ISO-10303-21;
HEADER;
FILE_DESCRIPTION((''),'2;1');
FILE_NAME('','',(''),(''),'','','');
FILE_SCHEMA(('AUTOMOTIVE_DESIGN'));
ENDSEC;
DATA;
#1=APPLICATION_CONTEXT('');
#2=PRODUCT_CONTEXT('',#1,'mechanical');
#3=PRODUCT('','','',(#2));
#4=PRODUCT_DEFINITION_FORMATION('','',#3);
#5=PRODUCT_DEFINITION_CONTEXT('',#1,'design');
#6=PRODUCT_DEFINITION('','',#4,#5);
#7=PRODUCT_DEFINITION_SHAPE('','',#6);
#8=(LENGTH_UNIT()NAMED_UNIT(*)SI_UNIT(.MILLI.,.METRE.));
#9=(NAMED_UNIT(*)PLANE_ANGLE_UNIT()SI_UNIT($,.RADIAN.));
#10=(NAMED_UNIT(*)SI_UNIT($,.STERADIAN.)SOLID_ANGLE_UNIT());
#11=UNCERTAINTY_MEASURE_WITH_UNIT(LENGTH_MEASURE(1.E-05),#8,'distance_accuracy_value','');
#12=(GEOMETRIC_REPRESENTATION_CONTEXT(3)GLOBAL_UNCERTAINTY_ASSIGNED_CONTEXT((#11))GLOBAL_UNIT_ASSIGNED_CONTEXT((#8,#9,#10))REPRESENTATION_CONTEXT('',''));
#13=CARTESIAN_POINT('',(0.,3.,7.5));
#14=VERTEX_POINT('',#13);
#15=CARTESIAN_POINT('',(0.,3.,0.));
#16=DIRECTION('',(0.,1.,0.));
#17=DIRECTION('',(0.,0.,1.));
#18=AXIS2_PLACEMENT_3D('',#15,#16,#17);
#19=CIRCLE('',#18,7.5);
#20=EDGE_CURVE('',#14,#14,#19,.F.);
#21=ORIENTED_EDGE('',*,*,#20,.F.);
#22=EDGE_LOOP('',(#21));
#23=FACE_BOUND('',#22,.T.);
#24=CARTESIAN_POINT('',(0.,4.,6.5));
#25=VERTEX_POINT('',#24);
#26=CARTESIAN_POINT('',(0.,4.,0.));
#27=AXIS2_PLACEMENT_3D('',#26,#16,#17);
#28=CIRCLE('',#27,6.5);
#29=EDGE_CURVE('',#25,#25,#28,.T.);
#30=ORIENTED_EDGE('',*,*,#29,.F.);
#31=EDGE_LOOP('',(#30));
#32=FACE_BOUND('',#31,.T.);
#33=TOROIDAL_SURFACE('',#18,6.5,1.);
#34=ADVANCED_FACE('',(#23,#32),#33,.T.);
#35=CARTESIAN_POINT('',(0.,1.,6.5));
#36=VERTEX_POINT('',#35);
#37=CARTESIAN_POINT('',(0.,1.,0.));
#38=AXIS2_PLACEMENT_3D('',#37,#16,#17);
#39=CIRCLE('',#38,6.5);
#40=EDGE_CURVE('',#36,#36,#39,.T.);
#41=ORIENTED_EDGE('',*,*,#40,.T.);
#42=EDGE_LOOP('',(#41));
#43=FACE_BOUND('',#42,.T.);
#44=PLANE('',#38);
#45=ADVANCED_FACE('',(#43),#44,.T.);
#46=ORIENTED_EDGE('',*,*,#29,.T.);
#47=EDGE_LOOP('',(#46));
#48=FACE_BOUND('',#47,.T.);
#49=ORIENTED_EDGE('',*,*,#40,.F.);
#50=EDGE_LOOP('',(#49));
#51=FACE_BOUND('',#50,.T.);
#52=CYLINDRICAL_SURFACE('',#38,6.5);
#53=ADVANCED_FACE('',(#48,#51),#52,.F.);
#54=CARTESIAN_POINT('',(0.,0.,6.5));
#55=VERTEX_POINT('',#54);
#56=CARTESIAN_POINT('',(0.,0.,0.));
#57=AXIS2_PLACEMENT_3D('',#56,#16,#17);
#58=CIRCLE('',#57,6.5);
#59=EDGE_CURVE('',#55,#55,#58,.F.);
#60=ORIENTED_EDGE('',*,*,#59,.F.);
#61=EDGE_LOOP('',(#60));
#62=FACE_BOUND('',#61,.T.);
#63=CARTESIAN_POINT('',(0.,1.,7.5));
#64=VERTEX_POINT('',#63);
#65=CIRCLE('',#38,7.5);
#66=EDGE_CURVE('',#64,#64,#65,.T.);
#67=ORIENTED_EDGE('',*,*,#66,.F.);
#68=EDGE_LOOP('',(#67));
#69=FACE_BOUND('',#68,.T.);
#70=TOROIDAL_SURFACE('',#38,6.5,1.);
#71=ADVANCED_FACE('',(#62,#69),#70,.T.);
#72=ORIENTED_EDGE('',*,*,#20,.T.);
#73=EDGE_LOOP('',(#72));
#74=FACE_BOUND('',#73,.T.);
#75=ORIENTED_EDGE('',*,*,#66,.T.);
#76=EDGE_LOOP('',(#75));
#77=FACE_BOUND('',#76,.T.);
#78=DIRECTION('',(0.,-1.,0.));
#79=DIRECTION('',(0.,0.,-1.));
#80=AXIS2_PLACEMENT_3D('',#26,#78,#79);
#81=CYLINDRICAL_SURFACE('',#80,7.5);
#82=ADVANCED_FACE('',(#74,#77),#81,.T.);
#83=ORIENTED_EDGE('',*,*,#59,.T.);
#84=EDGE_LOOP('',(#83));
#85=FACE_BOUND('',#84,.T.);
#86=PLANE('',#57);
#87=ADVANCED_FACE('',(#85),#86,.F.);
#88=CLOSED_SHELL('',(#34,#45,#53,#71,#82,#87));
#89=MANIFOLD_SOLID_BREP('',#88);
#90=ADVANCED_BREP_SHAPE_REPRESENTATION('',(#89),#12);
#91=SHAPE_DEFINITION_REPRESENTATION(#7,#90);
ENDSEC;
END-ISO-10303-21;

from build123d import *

# Parameters (mm, degrees)
SKETCH1_R           = 7.5
BOSS_EXTRUDE1_DEPTH = 4
SKETCH2_R           = 6.5
CUT_EXTRUDE1_DEPTH  = 3
FILLET1_R           = 1
FILLET2_R           = 1


with BuildPart() as part:
    # Sketch1 → Boss-Extrude1 (new body)
    with BuildSketch(Plane(origin=(0, 0, 0), x_dir=(1, 0, 0), z_dir=(0, 1, 0))):
        with Locations(Location((0, 0, 0), (0, 0, 270))):
            Circle(SKETCH1_R)
    extrude(amount=BOSS_EXTRUDE1_DEPTH)

    # Sketch2 → Cut-Extrude1 (cut)
    with BuildSketch(Plane(origin=(0, 4, 0), x_dir=(1, 0, 0), z_dir=(0, 1, 0))):
        with Locations(Location((0, 0, 0), (0, 0, 270))):
            Circle(SKETCH2_R)
    extrude(amount=-CUT_EXTRUDE1_DEPTH, mode=Mode.SUBTRACT)

    # Fillet1
    fillet1_edges = [part.edges().sort_by_distance(p)[0] for p in [
        (0, 4, -7.5),
    ]]
    fillet(fillet1_edges, radius=FILLET1_R - 0.0001)  # a hair under: the kernel refuses the full size

    # Fillet2
    fillet2_edges = [part.edges().sort_by_distance(p)[0] for p in [
        (0, 0, -7.5),
    ]]
    fillet(fillet2_edges, radius=FILLET2_R)


solid = part.part
